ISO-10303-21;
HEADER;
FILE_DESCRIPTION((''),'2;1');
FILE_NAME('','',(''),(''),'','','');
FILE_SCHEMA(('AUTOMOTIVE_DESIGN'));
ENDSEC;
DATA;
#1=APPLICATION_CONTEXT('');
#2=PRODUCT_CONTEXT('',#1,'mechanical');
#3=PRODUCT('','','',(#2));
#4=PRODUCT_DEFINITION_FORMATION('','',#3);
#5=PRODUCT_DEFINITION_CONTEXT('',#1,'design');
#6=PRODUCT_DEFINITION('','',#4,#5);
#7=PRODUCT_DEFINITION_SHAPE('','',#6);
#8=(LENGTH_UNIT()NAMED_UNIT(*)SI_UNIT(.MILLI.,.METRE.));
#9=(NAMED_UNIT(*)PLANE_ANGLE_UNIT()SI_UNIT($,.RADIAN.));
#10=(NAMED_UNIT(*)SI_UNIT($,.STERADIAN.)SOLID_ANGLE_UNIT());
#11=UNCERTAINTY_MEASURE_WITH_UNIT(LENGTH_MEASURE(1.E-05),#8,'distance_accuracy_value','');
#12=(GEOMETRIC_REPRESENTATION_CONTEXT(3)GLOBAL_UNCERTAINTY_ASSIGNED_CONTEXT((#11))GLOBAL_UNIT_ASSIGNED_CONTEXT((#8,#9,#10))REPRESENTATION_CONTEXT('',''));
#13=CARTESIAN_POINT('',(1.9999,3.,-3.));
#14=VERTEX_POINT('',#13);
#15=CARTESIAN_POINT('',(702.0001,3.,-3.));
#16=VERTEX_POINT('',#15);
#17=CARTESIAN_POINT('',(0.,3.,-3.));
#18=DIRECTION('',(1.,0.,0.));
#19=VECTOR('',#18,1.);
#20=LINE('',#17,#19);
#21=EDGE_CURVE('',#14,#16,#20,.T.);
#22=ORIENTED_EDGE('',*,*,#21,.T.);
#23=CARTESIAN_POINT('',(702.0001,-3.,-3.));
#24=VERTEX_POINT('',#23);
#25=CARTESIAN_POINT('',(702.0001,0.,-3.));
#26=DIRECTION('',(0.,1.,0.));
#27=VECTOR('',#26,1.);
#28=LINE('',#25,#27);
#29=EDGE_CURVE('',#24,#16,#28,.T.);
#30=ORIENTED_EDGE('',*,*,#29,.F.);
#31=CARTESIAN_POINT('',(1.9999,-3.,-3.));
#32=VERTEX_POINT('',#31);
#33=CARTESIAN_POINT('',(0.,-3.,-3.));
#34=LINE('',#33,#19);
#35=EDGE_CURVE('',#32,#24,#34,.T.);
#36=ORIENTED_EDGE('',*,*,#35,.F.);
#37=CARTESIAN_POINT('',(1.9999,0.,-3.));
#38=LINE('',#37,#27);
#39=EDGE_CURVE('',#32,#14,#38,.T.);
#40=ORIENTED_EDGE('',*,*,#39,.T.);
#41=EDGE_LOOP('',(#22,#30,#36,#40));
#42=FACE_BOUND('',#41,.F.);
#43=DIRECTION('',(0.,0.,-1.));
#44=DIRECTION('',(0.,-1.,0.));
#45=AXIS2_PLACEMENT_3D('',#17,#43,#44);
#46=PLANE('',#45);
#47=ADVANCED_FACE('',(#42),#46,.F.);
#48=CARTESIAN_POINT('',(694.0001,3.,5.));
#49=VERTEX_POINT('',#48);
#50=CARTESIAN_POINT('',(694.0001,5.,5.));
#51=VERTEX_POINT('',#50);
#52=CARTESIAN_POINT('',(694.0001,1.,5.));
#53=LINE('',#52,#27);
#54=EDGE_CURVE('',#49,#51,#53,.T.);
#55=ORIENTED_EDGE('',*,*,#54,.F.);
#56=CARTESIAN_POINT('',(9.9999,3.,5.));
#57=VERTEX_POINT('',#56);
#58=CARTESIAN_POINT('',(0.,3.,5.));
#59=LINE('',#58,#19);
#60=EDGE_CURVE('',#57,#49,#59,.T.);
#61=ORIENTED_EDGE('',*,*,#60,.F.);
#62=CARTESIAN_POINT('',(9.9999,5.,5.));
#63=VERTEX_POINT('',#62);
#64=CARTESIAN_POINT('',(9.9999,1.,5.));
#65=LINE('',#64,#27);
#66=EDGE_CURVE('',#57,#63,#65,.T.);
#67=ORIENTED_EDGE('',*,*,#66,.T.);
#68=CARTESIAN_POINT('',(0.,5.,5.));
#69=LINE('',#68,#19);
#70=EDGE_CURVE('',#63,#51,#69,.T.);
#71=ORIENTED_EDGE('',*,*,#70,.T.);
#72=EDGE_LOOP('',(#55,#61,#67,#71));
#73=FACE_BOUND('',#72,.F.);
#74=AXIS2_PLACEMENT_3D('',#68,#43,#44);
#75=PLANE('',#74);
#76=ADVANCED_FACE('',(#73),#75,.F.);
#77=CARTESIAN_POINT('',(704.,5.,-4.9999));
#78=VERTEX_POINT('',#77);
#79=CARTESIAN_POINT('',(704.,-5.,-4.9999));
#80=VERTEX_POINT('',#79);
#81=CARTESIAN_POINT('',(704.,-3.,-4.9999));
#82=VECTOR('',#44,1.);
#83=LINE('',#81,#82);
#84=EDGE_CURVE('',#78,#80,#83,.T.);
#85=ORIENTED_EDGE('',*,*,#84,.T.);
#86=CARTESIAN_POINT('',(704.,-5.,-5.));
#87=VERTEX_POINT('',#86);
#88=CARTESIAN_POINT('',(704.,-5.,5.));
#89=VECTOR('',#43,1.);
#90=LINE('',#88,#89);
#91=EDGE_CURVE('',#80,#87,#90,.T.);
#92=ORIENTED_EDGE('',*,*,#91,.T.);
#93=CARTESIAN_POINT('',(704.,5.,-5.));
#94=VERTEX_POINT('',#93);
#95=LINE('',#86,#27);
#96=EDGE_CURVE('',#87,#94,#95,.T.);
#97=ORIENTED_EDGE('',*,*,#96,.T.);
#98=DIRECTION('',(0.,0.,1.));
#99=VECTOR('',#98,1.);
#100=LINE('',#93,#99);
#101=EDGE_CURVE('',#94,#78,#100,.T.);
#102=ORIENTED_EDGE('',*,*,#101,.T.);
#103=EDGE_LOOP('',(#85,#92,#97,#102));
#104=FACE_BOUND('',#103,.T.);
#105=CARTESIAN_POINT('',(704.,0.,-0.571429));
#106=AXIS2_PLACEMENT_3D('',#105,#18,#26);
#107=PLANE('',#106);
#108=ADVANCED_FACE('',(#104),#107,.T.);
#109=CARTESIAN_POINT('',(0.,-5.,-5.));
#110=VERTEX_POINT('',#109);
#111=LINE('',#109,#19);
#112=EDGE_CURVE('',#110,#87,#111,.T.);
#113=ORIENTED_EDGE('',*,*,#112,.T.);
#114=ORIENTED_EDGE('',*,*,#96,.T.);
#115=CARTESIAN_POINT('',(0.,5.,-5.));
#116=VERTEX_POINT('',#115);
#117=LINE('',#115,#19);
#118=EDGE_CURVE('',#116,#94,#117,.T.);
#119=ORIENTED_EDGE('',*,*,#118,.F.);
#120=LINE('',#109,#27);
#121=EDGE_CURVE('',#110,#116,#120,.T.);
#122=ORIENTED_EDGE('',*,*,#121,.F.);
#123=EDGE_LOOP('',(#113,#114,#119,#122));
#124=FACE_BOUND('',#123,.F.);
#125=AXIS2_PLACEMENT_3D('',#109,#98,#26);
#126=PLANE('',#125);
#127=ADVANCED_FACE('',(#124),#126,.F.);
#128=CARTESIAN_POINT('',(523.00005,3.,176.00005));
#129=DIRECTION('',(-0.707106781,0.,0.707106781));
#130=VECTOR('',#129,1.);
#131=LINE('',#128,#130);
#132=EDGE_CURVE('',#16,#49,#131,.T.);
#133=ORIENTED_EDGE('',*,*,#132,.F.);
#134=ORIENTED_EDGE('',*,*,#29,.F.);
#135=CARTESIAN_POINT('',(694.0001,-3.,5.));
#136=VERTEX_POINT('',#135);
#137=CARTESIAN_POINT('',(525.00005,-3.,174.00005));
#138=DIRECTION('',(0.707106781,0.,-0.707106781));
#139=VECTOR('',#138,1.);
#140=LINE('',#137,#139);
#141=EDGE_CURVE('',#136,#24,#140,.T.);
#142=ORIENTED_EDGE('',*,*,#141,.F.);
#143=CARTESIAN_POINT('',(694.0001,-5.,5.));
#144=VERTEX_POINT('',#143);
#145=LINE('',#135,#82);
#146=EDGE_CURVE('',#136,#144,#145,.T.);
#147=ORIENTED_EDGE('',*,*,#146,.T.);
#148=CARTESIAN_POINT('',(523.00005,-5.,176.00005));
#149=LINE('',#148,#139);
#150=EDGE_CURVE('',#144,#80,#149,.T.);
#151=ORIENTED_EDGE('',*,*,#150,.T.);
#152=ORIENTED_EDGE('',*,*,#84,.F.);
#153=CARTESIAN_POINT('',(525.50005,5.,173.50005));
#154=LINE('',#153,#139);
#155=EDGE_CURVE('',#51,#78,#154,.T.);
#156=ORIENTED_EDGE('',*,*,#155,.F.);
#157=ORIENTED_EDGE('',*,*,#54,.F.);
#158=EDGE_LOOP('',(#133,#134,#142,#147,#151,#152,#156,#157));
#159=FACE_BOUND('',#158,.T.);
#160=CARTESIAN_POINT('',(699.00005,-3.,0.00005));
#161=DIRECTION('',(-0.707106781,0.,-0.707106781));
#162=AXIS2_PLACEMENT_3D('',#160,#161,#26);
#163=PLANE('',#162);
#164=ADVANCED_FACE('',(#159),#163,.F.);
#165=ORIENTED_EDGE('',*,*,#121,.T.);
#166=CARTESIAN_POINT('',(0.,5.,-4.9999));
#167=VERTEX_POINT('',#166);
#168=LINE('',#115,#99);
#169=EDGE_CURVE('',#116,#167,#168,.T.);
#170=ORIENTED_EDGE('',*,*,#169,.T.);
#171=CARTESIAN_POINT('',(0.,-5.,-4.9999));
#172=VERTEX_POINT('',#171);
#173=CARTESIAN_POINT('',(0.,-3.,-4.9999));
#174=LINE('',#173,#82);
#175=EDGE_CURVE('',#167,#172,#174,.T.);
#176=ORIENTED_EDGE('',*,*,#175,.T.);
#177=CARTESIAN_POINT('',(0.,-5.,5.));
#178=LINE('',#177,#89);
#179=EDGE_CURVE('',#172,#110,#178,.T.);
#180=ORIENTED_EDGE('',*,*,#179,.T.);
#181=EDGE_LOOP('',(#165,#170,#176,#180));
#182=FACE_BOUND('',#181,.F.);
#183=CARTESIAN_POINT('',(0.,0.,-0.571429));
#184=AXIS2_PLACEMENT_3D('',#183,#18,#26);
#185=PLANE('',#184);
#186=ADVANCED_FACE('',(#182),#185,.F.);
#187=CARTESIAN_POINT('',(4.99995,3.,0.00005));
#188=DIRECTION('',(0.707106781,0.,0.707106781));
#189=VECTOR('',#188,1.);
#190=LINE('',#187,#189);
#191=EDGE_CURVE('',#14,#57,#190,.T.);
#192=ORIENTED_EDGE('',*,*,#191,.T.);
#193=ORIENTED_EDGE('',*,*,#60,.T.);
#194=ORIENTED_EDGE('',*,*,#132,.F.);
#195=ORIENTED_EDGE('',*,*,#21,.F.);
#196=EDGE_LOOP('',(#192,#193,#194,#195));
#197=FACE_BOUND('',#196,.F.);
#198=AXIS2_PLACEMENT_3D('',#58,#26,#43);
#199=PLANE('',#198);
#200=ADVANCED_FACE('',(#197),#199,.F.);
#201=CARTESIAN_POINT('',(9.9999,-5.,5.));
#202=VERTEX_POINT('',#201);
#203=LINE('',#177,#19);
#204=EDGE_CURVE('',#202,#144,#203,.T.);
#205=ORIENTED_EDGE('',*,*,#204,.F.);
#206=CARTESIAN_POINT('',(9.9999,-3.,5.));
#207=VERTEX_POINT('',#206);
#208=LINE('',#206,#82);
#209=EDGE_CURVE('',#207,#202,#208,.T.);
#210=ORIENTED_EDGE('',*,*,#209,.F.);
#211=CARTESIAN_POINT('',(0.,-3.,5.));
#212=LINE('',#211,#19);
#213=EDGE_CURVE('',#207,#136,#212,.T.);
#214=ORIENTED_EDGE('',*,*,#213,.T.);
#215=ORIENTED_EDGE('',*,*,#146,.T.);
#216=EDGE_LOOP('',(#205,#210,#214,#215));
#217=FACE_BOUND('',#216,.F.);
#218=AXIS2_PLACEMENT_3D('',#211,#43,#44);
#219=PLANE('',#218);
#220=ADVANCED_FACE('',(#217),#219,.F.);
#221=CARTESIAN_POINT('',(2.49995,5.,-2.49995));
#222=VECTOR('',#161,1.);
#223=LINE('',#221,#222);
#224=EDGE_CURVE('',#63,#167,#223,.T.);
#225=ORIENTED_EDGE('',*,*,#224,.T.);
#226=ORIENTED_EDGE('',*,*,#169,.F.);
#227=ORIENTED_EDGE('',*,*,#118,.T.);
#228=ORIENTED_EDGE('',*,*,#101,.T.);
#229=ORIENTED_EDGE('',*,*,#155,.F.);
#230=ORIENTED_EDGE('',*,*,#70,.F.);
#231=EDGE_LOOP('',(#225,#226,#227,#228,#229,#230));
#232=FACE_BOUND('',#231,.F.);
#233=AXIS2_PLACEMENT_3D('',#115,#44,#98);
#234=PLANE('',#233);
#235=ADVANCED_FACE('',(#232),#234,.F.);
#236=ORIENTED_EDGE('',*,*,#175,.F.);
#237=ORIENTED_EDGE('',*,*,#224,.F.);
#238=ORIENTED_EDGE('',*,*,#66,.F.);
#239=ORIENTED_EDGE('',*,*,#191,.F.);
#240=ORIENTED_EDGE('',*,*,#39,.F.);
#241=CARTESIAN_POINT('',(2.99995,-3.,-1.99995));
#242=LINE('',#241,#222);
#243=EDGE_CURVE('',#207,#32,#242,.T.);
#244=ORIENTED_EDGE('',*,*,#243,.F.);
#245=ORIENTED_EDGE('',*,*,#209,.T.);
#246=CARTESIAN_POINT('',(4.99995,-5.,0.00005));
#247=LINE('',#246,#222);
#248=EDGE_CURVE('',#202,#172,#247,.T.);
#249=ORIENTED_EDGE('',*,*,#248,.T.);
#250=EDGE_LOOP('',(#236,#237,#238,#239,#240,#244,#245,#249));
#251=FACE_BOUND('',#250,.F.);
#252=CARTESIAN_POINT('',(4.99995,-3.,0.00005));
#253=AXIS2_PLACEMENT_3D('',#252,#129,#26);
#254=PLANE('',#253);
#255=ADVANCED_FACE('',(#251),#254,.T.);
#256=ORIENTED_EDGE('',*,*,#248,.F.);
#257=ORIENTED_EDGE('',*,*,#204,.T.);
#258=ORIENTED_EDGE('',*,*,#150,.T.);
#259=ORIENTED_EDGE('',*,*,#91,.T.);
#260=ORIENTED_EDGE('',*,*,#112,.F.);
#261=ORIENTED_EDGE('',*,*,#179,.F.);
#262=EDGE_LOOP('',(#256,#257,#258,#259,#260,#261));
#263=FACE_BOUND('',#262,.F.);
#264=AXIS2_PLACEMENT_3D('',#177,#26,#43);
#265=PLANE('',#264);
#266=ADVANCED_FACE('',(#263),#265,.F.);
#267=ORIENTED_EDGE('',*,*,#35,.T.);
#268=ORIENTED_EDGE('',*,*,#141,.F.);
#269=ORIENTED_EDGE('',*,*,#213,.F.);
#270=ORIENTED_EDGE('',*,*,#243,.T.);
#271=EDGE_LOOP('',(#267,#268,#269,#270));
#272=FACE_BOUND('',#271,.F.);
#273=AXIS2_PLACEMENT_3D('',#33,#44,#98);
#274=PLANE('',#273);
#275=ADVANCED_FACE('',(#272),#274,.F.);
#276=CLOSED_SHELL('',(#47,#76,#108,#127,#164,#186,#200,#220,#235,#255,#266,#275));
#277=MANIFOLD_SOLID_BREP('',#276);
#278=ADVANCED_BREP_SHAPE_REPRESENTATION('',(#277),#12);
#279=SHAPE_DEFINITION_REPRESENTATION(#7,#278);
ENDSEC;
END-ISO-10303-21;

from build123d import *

# Parameters (mm, degrees)
F1_DEPTH   = 704
F2_C1_SIZE = 9.9999
F2_C2_SIZE = 9.9999


# Not quite as in the source:
# - a fillet or chamfer is up to 0.001 mm smaller than in the source, because OpenCascade refuses the exact size


with BuildPart() as f1:
    # F0 (on Right) → F1 (new body)
    with BuildSketch(Plane.YZ):
        Polygon((-3, 5), (-5, 5), (-5, -5), (5, -5), (5, 5), (3, 5), (3, -3), (-3, -3), align=None)
    extrude(amount=F1_DEPTH)

    # F2: chamfer of 10 on 3 edges, made by hand

    # F2_c1 (size 10 in the source; OpenCascade refuses exactly that, so slightly less here)
    f2_c1_edges = [f1.edges().sort_by_distance(p)[0] for p in [
        (0, -4, 5),
    ]]
    chamfer(f2_c1_edges, length=F2_C1_SIZE)

    # F2_c2 (size 10 in the source; OpenCascade refuses exactly that, so slightly less here)
    f2_c2_edges = [f1.edges().sort_by_distance(p)[0] for p in [
        (704, -4, 5),
    ]]
    chamfer(f2_c2_edges, length=F2_C2_SIZE)


solid = f1.part
